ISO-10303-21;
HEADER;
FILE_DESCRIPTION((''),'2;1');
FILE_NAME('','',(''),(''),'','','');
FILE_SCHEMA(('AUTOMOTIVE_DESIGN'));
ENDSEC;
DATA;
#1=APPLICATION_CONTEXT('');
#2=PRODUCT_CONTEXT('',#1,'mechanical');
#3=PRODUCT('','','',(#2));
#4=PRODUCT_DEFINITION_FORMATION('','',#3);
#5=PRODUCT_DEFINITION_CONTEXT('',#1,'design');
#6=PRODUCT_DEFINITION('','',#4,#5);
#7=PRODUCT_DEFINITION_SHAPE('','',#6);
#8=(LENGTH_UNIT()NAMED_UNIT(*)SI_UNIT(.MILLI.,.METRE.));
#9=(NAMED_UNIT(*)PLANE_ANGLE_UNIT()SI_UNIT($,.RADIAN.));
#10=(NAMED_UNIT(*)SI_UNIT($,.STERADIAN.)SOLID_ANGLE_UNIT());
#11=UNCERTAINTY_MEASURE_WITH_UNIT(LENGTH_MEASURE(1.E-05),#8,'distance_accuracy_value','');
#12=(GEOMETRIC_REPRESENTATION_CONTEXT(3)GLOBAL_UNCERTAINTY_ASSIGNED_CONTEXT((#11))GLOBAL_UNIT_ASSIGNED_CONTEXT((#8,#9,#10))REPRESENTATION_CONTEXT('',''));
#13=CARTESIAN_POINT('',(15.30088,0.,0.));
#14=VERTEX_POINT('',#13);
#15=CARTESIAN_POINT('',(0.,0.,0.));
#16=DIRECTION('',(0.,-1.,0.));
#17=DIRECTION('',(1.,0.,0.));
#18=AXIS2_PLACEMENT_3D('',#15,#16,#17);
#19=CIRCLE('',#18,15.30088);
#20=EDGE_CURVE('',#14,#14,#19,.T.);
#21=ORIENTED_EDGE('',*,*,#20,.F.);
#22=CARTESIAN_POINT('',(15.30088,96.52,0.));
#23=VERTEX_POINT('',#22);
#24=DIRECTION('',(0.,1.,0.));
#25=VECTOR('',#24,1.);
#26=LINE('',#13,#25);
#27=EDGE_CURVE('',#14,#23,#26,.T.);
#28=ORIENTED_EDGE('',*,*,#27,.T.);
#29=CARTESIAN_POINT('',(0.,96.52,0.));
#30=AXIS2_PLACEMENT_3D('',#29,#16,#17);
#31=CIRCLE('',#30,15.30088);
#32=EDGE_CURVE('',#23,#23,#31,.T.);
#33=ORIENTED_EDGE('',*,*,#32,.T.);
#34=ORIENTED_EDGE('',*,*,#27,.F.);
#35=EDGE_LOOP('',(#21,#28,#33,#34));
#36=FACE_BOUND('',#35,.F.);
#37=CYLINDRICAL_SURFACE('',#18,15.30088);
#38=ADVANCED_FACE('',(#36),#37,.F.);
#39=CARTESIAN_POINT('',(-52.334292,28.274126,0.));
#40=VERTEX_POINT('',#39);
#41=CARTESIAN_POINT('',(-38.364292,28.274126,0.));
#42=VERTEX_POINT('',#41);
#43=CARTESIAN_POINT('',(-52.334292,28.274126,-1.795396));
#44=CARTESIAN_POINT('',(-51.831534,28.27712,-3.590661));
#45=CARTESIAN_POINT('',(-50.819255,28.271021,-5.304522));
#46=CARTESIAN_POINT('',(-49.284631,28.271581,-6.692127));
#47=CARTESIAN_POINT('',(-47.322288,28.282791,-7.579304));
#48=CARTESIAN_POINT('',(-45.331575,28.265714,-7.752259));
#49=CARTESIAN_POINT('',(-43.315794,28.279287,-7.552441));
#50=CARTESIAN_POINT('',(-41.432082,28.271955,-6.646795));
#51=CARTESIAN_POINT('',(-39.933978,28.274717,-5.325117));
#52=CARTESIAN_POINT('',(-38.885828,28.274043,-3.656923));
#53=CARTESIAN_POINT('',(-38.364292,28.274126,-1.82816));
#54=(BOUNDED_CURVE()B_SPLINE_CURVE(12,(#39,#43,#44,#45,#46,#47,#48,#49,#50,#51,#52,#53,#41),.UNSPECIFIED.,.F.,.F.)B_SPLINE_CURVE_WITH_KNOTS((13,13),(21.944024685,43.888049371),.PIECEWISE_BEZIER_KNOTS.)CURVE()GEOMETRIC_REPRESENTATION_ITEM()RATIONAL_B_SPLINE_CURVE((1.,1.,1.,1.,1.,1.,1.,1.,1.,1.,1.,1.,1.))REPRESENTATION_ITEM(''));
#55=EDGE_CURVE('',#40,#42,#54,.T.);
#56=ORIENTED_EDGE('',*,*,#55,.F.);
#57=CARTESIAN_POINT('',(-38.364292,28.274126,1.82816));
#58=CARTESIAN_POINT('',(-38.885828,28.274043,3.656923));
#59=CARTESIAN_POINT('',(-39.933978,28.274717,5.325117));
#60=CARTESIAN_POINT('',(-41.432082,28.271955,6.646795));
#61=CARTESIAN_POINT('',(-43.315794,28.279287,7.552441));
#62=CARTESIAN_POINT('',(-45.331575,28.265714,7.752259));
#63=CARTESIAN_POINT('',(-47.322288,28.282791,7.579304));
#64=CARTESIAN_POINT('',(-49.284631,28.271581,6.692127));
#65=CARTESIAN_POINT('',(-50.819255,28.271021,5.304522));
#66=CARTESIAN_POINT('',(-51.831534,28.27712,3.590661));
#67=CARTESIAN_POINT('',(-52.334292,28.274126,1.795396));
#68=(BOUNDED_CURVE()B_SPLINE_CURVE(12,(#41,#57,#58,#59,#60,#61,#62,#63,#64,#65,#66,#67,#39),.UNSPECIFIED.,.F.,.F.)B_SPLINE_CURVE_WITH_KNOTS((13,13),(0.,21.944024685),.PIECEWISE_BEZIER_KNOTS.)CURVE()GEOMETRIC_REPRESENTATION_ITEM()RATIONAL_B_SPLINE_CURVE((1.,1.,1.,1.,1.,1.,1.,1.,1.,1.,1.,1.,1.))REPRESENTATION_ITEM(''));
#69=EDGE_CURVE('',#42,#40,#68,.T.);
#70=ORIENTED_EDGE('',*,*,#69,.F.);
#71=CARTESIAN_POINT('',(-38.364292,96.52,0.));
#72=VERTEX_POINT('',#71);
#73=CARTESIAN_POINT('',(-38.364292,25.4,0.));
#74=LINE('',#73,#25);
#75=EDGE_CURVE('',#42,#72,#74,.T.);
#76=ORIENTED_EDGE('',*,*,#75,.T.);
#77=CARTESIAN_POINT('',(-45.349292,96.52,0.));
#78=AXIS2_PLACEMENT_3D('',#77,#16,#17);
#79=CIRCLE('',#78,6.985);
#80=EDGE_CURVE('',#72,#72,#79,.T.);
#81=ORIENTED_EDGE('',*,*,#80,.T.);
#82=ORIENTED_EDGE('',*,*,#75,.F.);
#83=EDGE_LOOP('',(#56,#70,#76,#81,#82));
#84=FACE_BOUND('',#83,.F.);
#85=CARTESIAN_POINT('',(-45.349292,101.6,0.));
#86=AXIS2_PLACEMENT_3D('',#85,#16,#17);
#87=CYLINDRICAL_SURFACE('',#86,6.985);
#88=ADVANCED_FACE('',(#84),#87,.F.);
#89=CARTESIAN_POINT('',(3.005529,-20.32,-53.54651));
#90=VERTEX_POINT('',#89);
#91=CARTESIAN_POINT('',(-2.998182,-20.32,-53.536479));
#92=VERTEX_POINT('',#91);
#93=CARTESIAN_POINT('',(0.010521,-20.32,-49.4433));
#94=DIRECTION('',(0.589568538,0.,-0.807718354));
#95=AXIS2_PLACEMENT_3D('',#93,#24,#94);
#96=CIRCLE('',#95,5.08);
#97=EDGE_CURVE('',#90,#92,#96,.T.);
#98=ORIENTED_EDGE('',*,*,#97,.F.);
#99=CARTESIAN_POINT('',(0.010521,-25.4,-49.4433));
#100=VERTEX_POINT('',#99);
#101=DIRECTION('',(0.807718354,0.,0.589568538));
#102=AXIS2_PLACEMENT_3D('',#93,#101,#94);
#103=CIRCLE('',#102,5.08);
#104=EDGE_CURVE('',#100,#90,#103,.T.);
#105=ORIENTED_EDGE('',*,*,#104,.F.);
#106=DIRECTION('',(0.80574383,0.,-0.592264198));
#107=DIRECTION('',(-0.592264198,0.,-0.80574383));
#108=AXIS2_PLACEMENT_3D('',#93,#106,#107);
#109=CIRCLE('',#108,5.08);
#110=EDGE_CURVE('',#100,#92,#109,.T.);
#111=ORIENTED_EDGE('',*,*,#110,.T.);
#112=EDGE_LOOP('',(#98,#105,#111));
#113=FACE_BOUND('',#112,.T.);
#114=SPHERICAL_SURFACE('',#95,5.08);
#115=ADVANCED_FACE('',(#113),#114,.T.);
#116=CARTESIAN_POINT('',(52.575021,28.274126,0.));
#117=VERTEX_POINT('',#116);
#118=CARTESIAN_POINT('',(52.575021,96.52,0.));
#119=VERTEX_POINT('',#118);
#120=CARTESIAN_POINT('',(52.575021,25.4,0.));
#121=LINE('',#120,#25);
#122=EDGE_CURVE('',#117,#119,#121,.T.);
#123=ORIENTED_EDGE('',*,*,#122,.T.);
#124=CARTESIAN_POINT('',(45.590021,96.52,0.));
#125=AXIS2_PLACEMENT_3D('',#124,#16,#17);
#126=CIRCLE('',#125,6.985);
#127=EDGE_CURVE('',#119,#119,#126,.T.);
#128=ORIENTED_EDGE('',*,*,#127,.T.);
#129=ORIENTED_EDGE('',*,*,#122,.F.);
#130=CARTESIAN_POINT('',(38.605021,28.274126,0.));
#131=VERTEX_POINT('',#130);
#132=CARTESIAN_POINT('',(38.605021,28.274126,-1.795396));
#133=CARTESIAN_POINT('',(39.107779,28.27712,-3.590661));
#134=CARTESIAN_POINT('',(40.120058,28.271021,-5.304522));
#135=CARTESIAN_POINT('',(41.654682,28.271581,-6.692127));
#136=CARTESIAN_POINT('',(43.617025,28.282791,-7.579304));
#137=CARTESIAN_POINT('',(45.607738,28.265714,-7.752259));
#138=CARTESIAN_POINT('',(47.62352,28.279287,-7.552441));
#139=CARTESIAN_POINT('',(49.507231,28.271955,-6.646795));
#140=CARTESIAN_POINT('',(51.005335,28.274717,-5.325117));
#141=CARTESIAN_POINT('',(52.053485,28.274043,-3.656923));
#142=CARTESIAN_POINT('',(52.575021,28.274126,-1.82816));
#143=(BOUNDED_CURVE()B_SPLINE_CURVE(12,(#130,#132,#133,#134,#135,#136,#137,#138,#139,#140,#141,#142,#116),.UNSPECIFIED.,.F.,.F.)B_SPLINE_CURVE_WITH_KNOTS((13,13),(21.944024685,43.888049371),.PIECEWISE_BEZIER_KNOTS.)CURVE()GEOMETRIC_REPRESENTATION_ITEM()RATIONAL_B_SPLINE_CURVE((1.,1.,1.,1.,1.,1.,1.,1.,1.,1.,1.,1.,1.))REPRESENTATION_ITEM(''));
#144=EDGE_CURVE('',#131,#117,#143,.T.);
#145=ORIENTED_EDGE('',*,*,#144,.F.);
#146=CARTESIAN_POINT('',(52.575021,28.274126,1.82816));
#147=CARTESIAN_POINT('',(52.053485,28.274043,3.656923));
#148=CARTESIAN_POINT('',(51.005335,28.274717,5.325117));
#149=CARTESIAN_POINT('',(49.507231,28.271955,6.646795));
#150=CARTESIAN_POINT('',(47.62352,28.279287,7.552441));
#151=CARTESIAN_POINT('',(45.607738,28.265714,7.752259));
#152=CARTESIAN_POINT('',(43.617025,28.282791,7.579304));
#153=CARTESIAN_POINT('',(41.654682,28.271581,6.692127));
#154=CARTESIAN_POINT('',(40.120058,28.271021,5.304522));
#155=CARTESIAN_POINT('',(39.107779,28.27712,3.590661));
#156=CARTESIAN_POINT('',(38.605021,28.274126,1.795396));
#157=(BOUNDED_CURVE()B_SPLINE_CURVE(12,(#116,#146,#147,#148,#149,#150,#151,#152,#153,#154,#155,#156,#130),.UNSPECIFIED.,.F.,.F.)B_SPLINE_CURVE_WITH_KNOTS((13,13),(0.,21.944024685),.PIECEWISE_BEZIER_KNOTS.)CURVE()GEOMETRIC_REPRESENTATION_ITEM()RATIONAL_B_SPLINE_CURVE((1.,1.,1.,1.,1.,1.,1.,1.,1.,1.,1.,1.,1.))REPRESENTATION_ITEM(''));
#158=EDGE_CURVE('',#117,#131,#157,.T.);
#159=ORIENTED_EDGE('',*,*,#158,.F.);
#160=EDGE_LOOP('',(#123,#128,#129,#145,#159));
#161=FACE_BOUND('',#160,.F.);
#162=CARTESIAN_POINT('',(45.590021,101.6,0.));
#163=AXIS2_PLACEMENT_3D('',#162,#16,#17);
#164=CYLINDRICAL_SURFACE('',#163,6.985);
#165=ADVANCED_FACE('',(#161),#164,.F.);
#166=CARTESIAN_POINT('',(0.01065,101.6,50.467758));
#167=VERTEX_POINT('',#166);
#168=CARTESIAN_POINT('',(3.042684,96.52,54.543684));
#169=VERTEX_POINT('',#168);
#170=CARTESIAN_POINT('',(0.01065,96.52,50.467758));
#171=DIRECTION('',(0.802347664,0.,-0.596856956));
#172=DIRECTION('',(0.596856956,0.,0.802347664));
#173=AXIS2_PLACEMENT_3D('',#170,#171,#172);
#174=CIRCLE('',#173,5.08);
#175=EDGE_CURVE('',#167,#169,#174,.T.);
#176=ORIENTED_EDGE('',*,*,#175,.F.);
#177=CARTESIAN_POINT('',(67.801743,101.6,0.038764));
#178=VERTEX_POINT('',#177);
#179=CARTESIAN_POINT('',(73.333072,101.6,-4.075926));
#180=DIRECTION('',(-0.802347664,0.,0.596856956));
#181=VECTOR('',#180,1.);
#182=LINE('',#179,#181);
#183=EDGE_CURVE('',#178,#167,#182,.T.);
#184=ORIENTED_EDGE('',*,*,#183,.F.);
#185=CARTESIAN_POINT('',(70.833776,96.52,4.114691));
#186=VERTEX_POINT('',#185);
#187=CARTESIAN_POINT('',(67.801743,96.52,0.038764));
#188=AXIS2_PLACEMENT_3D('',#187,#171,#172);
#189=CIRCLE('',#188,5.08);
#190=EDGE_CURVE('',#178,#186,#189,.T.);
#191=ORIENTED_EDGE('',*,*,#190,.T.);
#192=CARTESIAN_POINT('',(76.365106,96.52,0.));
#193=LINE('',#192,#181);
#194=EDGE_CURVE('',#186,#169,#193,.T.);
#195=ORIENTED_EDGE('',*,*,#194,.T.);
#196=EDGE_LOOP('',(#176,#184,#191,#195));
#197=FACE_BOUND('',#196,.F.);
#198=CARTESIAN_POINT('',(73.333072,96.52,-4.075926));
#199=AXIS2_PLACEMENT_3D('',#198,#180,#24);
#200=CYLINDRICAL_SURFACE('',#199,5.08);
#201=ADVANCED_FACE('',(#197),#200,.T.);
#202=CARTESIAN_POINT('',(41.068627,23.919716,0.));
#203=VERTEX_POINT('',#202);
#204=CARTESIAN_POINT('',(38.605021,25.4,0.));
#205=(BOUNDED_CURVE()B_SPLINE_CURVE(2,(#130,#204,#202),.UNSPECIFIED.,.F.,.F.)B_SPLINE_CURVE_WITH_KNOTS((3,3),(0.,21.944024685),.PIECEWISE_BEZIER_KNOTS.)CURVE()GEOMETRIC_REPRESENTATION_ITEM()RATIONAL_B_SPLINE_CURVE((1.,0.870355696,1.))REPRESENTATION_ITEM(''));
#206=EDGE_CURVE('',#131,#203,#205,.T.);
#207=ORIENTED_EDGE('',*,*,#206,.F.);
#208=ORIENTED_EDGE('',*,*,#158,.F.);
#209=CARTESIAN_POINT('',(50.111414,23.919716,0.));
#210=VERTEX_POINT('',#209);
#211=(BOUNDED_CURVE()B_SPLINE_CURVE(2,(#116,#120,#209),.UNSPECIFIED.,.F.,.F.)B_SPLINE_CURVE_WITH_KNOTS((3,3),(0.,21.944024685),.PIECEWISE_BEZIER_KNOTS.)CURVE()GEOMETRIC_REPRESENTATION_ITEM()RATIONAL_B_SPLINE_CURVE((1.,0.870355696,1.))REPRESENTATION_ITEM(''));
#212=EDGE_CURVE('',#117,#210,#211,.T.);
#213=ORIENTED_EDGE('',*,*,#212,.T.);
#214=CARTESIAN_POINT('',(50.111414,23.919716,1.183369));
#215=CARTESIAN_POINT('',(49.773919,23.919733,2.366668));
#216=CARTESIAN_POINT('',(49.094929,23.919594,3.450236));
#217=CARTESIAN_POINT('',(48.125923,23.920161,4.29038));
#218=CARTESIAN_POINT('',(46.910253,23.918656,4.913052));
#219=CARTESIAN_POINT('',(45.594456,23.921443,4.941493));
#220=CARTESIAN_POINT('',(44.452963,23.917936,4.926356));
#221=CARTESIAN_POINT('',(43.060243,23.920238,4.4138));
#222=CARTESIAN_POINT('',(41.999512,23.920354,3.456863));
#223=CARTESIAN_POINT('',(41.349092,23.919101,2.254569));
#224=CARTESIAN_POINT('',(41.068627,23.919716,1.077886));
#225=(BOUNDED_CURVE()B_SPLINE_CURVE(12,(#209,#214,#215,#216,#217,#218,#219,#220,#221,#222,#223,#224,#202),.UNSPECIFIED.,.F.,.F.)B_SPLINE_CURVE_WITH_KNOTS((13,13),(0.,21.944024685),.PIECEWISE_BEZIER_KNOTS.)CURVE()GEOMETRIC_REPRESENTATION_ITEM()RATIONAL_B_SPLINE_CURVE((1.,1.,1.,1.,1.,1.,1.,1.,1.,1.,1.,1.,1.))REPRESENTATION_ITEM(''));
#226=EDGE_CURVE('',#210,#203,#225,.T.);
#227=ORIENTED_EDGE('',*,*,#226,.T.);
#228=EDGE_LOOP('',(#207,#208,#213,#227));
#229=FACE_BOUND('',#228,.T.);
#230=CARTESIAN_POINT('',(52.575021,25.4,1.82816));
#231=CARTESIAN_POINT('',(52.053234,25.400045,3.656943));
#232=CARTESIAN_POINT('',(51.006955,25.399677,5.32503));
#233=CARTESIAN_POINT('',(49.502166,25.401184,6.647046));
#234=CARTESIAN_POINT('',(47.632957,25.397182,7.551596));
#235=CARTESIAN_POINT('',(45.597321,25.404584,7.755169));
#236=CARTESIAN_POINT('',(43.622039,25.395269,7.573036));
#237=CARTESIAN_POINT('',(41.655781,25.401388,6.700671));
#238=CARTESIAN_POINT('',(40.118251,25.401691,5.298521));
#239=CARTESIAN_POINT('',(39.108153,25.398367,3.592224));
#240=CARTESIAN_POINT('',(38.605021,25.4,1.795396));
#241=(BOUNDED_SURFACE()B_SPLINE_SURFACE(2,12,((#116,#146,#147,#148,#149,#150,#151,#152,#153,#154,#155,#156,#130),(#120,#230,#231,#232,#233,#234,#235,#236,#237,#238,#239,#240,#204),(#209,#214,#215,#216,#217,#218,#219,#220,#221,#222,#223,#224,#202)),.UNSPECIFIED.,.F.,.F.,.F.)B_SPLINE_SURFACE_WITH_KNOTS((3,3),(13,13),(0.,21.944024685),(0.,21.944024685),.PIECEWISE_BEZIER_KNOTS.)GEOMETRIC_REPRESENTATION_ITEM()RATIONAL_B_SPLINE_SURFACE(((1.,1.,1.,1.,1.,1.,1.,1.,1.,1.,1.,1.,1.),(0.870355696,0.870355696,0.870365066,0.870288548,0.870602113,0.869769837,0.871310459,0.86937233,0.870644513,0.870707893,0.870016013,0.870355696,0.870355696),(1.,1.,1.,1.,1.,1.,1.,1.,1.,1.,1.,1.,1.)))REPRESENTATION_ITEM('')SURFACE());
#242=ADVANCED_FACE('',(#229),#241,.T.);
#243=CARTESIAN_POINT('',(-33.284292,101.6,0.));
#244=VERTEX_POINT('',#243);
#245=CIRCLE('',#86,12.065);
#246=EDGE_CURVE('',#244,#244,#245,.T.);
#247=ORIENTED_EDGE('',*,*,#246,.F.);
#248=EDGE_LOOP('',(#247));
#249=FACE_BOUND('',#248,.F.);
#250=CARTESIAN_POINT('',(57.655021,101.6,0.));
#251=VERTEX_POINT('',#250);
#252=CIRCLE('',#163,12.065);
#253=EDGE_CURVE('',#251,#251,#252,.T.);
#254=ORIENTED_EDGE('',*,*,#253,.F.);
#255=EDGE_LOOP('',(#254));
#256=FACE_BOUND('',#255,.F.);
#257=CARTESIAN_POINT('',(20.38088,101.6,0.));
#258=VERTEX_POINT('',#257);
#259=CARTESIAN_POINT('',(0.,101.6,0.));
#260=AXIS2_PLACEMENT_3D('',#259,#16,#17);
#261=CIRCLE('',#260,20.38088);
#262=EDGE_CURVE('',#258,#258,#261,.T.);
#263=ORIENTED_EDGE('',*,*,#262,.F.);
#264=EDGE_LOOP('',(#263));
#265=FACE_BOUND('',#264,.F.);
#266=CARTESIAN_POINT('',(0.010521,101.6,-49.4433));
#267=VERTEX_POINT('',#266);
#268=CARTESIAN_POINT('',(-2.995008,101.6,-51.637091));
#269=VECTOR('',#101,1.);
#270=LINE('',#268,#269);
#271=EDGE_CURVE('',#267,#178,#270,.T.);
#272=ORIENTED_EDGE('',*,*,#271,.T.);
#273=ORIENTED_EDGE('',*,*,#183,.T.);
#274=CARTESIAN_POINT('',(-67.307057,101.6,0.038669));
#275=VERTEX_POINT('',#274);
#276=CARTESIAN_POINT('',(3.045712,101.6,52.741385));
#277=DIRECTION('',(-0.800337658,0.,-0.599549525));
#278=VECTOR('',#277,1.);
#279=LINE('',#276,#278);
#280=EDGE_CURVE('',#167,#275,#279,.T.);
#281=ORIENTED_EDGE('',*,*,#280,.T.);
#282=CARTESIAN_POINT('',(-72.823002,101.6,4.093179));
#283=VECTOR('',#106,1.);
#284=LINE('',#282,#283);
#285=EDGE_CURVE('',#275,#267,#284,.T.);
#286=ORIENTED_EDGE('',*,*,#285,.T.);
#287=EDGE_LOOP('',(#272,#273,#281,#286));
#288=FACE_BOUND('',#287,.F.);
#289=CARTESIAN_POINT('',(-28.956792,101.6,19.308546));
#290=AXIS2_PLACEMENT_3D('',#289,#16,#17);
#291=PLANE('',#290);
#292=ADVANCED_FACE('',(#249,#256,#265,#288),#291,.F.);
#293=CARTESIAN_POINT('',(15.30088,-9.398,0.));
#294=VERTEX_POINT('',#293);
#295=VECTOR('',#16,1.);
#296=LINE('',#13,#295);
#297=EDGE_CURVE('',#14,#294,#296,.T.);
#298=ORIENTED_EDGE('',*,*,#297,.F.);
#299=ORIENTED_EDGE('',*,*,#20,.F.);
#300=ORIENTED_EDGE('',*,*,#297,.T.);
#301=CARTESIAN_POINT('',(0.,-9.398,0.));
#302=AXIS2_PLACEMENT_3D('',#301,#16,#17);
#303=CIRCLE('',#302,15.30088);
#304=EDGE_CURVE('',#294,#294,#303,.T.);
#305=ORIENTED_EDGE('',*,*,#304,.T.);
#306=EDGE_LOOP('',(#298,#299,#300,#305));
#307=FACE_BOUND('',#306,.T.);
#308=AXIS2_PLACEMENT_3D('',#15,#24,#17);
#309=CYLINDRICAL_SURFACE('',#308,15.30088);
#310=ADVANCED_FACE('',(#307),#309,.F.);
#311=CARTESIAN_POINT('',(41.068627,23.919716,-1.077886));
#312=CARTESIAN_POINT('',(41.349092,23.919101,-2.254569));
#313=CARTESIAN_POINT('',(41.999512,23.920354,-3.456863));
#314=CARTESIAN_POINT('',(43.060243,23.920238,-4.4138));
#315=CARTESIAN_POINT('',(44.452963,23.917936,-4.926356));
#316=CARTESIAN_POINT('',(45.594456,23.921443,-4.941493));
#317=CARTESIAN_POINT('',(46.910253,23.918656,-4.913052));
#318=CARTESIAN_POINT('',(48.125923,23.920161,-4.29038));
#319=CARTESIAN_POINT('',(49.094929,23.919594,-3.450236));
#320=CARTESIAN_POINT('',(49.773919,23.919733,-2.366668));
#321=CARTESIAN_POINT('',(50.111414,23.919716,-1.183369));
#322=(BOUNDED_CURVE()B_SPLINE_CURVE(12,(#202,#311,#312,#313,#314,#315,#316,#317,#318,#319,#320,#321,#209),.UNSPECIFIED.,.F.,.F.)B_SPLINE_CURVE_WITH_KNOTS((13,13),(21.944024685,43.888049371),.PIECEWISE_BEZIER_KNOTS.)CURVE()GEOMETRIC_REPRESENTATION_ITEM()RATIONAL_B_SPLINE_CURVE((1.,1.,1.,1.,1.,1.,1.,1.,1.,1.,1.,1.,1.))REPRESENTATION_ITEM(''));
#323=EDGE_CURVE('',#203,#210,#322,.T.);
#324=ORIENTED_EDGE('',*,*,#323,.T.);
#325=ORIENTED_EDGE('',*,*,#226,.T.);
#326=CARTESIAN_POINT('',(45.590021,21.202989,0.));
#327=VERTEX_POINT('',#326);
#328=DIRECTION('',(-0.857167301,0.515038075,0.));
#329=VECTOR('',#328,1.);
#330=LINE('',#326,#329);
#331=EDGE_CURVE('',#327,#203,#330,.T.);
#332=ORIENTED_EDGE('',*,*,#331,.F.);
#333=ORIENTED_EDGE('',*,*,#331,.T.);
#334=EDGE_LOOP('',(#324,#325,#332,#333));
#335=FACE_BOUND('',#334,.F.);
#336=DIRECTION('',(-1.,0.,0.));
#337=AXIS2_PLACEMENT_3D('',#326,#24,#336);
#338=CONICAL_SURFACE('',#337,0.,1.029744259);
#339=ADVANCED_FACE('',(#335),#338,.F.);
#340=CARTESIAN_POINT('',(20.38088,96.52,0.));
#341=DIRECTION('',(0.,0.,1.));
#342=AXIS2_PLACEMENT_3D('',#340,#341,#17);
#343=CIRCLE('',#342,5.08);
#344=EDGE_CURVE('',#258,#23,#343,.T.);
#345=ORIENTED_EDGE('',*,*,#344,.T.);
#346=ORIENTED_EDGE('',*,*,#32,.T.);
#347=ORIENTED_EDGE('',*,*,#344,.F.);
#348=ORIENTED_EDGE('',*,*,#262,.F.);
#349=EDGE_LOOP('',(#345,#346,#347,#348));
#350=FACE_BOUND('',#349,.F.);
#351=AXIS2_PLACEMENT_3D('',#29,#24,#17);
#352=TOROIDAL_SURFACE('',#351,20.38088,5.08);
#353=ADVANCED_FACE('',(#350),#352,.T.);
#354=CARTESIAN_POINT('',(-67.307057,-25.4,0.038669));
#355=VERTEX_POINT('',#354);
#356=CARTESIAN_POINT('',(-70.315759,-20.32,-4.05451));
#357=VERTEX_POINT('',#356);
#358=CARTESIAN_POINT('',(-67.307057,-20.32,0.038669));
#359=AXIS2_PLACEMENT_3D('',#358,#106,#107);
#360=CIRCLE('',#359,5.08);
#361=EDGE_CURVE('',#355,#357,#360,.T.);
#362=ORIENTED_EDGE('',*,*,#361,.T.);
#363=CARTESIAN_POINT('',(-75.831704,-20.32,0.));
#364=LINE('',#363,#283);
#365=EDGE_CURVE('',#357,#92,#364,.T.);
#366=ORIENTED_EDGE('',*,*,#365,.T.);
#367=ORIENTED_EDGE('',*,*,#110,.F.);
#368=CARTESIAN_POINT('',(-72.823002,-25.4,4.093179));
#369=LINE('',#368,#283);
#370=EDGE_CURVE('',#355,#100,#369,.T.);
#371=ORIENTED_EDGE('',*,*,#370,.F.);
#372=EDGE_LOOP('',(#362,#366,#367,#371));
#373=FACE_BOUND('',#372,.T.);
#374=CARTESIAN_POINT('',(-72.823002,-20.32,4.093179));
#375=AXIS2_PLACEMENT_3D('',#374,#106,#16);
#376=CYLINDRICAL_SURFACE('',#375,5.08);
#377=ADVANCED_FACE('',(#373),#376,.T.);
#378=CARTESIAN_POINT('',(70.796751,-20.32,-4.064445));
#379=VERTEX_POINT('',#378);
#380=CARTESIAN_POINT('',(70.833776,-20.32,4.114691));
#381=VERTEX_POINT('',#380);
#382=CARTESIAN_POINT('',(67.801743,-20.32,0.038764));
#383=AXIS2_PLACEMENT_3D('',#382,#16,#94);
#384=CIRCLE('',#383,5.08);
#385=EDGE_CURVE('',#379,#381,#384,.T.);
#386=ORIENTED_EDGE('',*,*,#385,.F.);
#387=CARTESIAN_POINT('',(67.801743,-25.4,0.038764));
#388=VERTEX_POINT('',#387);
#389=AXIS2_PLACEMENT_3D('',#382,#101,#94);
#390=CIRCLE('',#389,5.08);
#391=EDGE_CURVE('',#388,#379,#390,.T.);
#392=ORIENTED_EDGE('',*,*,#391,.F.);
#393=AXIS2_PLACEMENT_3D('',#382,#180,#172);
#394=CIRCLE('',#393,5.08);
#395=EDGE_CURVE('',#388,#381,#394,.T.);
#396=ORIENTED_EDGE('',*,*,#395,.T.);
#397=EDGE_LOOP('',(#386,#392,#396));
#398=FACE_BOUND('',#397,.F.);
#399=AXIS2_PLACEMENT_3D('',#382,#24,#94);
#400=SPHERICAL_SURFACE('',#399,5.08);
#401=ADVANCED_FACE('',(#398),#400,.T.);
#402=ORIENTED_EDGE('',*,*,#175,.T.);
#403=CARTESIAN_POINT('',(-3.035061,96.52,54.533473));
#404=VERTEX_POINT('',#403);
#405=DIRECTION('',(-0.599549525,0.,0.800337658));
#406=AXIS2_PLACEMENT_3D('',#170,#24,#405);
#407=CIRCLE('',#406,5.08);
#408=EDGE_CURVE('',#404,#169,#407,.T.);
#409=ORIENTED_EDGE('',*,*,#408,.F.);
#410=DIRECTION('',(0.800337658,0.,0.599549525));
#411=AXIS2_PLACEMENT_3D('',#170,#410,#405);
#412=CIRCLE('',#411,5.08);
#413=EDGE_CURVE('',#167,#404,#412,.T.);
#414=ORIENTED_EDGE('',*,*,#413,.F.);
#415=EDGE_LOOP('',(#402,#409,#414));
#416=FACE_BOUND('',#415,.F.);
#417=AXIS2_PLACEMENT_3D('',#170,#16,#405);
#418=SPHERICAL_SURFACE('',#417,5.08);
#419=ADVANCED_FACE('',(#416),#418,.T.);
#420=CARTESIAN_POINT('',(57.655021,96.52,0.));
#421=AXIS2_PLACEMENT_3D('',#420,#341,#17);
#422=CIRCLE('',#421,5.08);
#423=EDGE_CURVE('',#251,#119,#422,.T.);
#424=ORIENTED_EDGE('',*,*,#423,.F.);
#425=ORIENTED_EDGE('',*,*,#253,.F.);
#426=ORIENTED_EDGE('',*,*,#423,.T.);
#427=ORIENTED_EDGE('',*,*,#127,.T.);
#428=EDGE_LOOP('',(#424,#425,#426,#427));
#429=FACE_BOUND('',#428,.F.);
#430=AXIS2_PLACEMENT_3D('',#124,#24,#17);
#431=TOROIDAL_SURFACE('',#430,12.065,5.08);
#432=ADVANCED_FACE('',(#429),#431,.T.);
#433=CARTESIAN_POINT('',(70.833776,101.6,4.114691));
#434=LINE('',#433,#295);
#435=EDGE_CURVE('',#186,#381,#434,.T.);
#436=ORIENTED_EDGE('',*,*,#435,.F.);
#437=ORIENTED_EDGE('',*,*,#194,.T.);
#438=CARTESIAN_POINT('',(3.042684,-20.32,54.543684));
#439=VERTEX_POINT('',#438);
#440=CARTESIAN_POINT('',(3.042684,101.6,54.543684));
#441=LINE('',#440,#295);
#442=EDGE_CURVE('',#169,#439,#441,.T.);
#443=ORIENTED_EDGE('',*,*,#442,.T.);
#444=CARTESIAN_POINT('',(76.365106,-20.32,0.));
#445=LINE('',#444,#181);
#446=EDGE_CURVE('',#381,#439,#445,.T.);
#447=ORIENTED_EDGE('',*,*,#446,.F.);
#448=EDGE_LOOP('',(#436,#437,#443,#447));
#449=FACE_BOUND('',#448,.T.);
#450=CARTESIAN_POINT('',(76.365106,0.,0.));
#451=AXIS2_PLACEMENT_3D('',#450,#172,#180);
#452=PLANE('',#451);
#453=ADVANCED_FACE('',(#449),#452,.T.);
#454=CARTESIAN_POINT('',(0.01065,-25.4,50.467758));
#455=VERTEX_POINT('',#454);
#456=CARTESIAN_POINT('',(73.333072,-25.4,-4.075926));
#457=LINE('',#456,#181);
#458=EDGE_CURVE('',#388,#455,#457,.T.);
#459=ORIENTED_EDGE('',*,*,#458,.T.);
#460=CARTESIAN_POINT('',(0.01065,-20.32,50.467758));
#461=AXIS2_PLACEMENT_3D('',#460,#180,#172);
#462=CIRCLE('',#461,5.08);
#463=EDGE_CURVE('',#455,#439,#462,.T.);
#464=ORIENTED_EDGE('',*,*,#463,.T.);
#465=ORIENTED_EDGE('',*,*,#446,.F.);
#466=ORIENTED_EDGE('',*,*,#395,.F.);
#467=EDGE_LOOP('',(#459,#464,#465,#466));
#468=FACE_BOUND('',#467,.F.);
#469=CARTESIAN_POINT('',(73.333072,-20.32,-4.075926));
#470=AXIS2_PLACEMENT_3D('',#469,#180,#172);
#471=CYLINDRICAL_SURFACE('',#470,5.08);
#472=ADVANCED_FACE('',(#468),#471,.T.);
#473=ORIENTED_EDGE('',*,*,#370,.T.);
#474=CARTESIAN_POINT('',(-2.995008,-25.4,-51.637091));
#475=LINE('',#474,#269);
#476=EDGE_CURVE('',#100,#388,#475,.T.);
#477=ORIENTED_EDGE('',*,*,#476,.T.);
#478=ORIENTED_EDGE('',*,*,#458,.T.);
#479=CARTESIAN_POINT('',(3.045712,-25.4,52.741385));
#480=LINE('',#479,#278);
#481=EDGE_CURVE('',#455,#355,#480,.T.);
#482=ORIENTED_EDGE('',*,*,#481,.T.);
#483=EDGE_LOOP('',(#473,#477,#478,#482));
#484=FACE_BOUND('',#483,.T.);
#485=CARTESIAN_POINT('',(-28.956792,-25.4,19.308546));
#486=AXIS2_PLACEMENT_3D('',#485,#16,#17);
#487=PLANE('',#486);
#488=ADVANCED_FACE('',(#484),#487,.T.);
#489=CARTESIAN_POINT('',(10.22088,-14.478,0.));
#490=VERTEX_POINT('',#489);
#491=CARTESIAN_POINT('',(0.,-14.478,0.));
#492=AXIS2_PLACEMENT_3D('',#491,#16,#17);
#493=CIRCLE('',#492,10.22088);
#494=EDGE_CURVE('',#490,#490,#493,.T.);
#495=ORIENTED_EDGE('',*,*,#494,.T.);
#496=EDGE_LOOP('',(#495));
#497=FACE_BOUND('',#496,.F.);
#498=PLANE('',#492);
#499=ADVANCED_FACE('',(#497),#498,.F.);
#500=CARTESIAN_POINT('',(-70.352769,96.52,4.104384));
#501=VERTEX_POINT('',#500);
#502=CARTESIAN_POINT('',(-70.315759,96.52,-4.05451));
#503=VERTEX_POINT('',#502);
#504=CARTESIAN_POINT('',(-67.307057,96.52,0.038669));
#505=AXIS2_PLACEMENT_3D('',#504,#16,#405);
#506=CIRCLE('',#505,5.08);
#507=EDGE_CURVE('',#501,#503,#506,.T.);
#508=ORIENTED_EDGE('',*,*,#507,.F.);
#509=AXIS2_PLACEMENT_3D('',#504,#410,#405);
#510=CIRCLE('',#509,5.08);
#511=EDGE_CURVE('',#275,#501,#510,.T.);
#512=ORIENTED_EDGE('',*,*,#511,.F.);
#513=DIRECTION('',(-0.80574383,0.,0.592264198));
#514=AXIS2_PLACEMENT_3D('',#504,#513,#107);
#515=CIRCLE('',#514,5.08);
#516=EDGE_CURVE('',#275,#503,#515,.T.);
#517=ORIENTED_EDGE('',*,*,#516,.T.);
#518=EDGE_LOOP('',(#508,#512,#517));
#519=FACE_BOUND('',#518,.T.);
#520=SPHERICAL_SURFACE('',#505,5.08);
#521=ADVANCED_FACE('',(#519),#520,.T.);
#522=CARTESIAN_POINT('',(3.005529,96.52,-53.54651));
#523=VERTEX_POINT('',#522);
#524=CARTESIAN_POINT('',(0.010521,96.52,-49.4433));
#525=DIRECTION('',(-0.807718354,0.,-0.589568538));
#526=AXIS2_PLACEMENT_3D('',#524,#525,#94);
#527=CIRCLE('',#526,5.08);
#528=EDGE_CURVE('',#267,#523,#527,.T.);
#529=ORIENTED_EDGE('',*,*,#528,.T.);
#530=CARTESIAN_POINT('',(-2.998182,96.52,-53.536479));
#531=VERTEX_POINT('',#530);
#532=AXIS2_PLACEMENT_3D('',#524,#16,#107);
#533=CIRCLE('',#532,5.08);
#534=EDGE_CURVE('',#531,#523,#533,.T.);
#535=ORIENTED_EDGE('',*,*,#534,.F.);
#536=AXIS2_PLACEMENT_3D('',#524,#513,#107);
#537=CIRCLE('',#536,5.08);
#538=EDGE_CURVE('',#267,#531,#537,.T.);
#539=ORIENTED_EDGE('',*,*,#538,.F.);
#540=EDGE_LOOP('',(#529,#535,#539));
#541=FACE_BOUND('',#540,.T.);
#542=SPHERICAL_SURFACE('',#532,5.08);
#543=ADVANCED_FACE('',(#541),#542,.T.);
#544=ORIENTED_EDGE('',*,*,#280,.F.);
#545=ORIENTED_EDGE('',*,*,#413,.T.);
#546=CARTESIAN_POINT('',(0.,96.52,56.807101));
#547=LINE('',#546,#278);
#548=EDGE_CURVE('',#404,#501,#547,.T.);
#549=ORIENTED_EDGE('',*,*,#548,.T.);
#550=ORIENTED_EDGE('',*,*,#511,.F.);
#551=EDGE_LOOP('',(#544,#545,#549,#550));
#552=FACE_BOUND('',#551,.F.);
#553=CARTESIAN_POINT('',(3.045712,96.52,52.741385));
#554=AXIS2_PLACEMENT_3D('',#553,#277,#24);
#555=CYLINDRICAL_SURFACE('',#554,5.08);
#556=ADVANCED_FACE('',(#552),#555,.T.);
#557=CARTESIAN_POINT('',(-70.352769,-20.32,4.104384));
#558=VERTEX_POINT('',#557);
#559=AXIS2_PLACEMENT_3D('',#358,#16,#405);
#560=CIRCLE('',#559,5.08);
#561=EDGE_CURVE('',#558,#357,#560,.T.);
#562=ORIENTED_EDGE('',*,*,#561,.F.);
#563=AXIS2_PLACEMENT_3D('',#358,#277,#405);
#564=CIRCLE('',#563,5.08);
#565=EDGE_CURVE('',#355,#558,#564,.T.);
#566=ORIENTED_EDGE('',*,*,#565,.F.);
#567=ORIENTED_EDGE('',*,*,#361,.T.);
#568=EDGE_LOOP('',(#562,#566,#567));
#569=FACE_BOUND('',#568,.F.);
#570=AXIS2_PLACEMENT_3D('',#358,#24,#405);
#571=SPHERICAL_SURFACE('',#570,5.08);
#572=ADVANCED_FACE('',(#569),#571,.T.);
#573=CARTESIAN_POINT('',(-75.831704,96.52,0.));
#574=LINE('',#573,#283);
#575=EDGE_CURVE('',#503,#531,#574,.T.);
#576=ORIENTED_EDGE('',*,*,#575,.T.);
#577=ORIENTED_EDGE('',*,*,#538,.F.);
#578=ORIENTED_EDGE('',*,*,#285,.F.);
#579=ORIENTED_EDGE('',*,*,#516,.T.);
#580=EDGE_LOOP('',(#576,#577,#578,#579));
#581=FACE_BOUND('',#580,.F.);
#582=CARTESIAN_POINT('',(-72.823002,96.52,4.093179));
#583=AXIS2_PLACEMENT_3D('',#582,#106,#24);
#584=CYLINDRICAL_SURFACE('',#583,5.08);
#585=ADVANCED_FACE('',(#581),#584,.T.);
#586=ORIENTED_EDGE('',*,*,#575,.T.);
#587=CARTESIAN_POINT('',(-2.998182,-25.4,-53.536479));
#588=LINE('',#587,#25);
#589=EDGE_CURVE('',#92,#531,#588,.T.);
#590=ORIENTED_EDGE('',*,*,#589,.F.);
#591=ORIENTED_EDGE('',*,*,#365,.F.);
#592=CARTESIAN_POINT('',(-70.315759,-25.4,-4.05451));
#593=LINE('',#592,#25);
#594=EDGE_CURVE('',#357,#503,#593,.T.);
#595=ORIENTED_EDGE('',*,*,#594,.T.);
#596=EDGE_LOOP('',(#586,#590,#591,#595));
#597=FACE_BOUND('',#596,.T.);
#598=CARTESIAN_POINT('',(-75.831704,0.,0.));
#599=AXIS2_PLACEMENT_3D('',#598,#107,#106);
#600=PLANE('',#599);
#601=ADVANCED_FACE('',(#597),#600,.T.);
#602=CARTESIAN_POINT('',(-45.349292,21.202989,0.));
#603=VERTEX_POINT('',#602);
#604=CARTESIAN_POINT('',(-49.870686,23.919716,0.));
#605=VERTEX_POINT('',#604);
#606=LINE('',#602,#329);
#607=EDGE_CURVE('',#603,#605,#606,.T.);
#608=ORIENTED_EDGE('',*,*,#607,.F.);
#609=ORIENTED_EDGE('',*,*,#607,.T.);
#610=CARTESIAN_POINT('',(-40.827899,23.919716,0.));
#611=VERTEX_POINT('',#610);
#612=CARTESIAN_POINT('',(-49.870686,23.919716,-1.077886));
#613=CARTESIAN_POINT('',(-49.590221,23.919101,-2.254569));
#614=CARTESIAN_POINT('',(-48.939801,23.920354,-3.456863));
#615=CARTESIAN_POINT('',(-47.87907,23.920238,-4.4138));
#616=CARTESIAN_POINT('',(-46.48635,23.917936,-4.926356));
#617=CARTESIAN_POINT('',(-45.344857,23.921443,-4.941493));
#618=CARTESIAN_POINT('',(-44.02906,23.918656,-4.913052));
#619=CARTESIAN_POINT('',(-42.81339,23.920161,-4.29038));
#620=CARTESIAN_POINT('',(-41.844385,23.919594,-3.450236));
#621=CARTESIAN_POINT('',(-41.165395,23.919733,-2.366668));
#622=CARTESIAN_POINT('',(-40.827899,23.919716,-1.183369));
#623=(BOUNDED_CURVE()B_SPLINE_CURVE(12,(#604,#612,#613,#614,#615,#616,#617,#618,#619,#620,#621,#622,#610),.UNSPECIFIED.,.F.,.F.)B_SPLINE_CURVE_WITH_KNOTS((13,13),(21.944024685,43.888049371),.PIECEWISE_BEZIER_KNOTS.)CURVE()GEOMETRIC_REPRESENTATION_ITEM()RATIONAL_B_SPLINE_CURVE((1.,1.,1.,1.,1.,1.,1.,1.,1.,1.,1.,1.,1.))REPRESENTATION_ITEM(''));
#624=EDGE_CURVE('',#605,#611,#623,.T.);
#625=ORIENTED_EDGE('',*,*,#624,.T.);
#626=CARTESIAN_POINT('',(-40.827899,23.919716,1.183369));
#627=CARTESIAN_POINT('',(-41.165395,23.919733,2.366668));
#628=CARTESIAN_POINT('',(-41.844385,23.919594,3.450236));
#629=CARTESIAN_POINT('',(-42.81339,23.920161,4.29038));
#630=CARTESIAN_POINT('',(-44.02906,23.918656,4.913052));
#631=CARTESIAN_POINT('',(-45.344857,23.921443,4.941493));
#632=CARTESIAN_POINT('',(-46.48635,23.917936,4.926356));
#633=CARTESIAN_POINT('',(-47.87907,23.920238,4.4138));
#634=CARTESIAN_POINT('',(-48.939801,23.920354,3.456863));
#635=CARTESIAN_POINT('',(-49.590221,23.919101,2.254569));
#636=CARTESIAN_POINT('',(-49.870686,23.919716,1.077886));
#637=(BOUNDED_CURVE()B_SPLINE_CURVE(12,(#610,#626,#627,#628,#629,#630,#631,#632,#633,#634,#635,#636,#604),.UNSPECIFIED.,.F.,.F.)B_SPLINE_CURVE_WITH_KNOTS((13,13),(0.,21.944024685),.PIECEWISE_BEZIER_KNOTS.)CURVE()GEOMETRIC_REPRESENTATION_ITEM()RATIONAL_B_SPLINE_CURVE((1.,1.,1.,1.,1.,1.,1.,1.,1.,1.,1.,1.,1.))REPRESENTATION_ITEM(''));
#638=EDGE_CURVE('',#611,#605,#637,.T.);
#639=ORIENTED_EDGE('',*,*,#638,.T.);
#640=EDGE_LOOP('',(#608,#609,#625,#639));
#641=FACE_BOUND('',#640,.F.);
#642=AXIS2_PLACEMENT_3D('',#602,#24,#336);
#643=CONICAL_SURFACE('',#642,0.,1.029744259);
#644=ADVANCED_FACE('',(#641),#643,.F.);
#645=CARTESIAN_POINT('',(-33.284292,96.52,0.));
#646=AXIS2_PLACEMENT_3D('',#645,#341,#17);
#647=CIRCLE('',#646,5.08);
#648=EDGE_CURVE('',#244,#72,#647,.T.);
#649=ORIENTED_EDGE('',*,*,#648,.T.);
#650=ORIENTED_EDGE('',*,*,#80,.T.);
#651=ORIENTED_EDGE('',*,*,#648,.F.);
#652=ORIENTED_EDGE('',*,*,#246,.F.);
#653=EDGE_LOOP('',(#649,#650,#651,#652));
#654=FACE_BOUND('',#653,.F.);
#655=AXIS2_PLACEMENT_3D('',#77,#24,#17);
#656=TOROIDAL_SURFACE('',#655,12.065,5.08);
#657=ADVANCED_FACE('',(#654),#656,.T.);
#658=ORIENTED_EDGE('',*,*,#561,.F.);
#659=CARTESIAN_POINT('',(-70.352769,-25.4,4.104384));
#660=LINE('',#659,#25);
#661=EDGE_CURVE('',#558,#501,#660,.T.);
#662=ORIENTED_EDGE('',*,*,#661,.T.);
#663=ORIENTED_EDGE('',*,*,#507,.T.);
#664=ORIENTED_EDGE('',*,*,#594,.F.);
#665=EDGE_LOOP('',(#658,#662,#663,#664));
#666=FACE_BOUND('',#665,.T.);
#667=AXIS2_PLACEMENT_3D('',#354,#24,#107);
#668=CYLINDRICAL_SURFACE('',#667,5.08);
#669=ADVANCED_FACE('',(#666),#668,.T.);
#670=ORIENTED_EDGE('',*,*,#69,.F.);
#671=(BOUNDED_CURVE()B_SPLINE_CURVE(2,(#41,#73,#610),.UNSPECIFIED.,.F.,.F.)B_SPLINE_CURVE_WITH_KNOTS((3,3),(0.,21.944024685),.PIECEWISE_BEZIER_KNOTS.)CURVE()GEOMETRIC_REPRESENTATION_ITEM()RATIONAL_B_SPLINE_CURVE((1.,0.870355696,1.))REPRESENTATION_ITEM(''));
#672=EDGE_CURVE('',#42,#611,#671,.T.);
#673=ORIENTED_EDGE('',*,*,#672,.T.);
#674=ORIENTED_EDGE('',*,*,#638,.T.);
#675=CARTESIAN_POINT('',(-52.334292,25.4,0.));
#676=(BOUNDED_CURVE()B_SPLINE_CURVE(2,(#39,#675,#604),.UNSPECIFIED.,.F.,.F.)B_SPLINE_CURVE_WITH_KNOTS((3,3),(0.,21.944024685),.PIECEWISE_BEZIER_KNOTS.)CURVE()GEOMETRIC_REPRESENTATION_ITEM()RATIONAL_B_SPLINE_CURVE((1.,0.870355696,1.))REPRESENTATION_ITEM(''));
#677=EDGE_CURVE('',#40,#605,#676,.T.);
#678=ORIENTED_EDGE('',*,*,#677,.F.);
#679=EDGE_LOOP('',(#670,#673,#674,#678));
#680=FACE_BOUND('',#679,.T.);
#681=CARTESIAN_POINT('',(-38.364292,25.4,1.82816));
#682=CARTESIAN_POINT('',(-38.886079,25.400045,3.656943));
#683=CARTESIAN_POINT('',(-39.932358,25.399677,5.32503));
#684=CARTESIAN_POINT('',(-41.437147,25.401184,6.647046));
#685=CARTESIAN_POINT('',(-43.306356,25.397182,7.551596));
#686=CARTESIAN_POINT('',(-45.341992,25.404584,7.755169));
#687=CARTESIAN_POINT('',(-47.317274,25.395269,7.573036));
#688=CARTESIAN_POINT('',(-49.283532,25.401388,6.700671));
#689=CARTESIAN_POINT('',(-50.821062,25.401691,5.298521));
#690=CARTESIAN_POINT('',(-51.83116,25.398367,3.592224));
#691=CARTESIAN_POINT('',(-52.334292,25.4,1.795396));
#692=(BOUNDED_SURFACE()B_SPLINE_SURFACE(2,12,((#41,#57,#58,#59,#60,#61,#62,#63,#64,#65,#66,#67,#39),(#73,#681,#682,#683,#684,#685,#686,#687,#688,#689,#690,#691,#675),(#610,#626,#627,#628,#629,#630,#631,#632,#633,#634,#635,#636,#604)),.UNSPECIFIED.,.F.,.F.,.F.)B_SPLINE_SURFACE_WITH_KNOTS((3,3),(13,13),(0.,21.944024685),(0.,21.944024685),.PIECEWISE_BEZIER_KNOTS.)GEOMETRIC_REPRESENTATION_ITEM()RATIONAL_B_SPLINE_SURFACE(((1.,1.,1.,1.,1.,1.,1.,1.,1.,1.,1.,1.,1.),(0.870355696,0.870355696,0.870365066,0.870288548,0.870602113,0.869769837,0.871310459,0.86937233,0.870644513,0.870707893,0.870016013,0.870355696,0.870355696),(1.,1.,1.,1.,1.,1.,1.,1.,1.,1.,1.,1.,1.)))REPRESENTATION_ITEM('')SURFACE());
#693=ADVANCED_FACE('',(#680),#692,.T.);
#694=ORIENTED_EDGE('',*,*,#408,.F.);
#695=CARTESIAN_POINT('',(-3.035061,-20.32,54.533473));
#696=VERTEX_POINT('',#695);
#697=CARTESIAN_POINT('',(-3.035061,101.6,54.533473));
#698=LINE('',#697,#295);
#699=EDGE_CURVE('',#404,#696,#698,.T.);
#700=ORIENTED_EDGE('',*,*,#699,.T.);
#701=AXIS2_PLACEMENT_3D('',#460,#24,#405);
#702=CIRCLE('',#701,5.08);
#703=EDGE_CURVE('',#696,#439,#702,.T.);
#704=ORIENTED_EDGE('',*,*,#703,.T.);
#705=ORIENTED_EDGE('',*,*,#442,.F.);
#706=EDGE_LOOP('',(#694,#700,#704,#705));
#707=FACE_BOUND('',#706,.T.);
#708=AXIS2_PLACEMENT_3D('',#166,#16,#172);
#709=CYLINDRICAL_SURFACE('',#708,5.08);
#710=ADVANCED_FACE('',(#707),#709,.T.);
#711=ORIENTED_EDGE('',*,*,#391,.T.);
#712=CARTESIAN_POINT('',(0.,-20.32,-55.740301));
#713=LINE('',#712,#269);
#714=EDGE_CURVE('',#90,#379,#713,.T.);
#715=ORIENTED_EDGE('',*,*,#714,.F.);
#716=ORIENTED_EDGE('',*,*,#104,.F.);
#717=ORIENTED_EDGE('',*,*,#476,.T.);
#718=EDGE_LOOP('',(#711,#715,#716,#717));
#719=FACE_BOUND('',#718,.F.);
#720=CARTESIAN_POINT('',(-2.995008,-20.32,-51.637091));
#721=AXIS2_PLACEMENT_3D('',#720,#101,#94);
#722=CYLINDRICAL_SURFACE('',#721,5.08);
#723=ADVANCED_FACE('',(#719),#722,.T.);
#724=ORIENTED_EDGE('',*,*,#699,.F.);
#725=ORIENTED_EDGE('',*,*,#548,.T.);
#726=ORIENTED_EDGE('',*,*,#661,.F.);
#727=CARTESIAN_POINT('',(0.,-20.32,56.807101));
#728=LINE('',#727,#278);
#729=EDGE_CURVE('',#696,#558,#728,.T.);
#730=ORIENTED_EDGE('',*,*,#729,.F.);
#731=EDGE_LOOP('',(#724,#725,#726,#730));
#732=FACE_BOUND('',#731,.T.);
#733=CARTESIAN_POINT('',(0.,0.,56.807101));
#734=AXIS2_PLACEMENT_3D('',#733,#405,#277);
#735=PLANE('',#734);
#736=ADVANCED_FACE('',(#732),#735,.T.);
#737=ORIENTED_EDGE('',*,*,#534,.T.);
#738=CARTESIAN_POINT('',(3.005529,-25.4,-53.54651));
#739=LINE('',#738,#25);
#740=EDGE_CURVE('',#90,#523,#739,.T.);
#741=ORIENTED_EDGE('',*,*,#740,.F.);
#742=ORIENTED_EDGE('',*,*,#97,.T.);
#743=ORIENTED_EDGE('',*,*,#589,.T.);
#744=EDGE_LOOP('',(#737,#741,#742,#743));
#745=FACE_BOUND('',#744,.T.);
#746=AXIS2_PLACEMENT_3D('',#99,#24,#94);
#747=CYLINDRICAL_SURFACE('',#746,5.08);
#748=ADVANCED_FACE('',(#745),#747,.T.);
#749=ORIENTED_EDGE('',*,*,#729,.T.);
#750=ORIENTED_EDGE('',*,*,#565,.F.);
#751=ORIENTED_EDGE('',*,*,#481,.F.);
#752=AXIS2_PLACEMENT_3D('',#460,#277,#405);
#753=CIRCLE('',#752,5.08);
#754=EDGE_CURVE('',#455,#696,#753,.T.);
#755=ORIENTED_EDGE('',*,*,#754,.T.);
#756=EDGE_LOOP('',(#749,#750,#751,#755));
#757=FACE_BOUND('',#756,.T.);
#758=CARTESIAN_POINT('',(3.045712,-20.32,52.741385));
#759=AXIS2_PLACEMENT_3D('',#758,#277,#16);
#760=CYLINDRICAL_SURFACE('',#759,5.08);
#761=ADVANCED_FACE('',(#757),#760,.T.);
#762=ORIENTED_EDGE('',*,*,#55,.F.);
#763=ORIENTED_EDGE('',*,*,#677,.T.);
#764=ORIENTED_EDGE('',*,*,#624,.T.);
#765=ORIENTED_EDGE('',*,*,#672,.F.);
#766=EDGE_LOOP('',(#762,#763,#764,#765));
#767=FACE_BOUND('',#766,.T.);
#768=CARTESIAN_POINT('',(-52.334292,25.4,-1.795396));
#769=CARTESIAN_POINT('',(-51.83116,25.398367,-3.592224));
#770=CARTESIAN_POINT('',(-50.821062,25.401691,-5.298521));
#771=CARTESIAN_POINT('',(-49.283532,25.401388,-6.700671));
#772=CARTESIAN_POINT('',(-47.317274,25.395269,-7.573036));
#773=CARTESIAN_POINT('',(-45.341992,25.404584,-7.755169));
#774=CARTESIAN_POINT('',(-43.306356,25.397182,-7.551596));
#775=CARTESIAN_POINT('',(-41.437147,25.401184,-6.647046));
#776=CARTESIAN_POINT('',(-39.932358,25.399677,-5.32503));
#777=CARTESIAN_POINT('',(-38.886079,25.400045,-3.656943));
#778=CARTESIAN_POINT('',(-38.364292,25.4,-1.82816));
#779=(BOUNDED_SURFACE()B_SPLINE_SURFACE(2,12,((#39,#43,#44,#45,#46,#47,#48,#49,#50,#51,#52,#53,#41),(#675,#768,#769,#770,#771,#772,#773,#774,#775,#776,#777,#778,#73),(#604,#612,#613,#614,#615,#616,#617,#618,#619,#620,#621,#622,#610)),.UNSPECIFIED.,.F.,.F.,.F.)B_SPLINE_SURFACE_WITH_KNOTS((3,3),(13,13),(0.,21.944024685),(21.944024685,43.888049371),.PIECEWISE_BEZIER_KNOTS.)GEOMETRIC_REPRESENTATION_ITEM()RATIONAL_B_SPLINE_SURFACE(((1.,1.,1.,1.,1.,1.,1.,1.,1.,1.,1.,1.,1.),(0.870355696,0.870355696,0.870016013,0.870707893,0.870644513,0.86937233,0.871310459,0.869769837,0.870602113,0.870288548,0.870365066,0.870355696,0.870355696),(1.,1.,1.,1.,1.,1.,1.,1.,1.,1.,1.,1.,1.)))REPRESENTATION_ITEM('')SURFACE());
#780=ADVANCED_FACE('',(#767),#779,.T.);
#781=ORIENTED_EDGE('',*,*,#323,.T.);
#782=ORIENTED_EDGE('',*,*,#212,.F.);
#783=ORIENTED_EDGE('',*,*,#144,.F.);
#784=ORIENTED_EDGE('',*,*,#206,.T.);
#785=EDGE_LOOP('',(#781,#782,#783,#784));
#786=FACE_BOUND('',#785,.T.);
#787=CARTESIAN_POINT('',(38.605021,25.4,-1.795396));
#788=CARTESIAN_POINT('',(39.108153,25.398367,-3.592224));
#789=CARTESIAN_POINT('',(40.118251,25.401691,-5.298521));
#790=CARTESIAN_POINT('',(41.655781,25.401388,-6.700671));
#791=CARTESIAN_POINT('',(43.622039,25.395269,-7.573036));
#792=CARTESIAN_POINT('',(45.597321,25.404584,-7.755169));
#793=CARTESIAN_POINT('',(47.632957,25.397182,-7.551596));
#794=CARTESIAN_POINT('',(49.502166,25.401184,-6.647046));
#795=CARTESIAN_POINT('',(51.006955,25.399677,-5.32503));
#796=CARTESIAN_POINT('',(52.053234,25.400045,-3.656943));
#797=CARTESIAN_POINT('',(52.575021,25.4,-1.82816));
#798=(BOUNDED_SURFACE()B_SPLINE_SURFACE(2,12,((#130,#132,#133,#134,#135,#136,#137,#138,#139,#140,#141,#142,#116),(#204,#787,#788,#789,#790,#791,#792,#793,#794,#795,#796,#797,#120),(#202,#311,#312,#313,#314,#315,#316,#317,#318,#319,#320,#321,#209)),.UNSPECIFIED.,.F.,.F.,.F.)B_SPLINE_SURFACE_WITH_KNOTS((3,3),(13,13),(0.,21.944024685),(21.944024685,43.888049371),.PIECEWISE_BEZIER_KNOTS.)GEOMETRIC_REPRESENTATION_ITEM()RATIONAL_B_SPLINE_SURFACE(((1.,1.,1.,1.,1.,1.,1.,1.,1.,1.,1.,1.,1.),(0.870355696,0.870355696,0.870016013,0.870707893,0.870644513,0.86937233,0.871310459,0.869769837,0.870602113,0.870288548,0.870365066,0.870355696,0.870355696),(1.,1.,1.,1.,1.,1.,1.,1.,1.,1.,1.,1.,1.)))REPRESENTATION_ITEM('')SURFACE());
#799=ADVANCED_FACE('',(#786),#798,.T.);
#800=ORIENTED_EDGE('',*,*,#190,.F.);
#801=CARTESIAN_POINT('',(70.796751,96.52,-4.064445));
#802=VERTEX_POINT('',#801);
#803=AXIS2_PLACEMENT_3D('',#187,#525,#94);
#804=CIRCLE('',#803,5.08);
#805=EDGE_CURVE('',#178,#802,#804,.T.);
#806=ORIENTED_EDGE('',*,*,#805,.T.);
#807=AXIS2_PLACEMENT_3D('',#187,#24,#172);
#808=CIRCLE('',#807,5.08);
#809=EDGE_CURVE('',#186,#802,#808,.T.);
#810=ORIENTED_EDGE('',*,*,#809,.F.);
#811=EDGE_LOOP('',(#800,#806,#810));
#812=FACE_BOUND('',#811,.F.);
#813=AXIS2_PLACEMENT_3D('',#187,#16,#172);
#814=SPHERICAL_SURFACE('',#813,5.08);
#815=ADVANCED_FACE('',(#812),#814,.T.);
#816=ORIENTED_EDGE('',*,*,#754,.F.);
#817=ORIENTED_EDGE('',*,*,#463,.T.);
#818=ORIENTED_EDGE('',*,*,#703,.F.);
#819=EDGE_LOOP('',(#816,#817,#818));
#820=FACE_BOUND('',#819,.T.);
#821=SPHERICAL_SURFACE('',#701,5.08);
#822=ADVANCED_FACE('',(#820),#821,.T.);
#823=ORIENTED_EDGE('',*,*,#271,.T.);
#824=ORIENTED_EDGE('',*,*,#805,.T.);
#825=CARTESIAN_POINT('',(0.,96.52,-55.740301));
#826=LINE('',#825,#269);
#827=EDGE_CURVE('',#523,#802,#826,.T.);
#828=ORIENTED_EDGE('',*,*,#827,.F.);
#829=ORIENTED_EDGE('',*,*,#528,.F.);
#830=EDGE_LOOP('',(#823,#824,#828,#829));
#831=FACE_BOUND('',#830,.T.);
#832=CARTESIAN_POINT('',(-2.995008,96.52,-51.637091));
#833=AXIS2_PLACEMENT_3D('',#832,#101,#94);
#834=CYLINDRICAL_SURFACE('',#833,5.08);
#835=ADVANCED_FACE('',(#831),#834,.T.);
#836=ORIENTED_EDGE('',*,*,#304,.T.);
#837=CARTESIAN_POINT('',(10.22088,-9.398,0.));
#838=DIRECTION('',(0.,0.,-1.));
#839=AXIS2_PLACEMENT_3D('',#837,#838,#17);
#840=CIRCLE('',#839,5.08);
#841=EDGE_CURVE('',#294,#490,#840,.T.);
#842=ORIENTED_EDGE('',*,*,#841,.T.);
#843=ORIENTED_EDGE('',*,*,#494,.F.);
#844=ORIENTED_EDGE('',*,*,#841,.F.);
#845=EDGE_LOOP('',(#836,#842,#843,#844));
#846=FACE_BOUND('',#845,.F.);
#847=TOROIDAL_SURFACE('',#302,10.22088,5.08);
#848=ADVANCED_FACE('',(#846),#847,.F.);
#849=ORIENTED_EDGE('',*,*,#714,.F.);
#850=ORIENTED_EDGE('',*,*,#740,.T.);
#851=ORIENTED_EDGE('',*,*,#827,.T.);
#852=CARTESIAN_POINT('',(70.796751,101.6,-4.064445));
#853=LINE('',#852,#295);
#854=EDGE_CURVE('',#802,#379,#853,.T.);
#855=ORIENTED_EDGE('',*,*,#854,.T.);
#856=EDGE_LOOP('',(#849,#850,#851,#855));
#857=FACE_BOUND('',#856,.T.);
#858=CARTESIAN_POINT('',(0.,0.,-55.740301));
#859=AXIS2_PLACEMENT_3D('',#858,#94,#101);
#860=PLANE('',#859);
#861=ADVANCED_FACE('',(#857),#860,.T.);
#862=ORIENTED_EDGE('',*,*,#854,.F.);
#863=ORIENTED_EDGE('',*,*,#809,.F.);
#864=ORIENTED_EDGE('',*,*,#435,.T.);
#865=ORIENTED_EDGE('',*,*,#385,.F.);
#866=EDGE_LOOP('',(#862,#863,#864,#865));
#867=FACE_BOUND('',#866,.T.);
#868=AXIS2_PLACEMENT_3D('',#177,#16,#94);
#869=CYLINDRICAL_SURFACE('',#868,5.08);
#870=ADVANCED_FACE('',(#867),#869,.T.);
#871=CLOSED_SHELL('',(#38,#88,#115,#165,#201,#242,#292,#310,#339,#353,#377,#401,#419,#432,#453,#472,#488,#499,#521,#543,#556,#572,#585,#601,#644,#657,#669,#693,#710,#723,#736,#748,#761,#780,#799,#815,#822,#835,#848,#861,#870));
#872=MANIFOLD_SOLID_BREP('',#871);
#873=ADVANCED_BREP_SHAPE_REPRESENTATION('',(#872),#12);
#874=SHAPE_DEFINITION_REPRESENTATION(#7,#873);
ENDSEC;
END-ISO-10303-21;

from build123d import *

# Parameters (mm, degrees)
F1_DEPTH       = 25.4
F2_R           = 15.300879685
F3_DEPTH       = 14.478
F4_DEPTH       = 101.6
F6_D           = 13.97
F6_DEPTH       = 76.2
F6_CBORE_D     = 13.97
F6_CBORE_DEPTH = 6.35
F6_TIP         = 4.1970114239
F8_D           = 13.97
F8_DEPTH       = 76.2
F8_CBORE_D     = 13.97
F8_CBORE_DEPTH = 6.35
F8_TIP         = 4.1970114239
F9_R           = 5.08


with BuildPart() as f1:
    # F0 (on Front) → F1 (new body)
    with BuildSketch(Plane.XZ):
        with BuildLine():
            ThreePointArc((-7.1662437988, 0), (-5.0672995858, 5.0672995858), (0, 7.1662437988))
            Line((0, 7.1662437988), (0, 56.8071007729))
            Line((0, 56.8071007729), (-75.8317038417, 0))
            Line((-75.8317038417, 0), (-7.1662437988, 0))
        make_face()
        with BuildLine():
            Line((0, 56.8071007729), (0, 7.1662437988))
            ThreePointArc((0, 7.1662437988), (5.0672995858, 5.0672995858), (7.1662437988, 0))
            Line((7.1662437988, 0), (76.3651058078, 0))
            Line((76.3651058078, 0), (0, 56.8071007729))
        make_face()
        with BuildLine():
            Line((76.3651058078, 0), (7.1662437988, 0))
            ThreePointArc((7.1662437988, 0), (5.0672995858, -5.0672995858), (0, -7.1662437988))
            Line((0, -7.1662437988), (0, -55.740300566))
            Line((0, -55.740300566), (76.3651058078, 0))
        make_face()
        with BuildLine():
            Line((0, -55.740300566), (0, -7.1662437988))
            ThreePointArc((0, -7.1662437988), (-5.0672995858, -5.0672995858), (-7.1662437988, 0))
            Line((-7.1662437988, 0), (-75.8317038417, 0))
            Line((-75.8317038417, 0), (0, -55.740300566))
        make_face()
        with BuildLine():
            Line((7.1662437988, 0), (0, 0))
            Line((0, 0), (0, -7.1662437988))
            ThreePointArc((0, -7.1662437988), (5.0672995858, -5.0672995858), (7.1662437988, 0))
        make_face()
        with BuildLine():
            Line((-7.1662437988, 0), (0, 0))
            Line((0, 0), (0, 7.1662437988))
            ThreePointArc((0, 7.1662437988), (-5.0672995858, 5.0672995858), (-7.1662437988, 0))
        make_face()
        with BuildLine():
            Line((0, 7.1662437988), (0, 0))
            Line((0, 0), (7.1662437988, 0))
            ThreePointArc((7.1662437988, 0), (5.0672995858, 5.0672995858), (0, 7.1662437988))
        make_face()
        with BuildLine():
            Line((0, -7.1662437988), (0, 0))
            Line((0, 0), (-7.1662437988, 0))
            ThreePointArc((-7.1662437988, 0), (-5.0672995858, -5.0672995858), (0, -7.1662437988))
        make_face()
    extrude(amount=F1_DEPTH)

    # F2 (on Front) → F3 (cut)
    with BuildSketch(Plane.XZ):
        Circle(F2_R)
    extrude(amount=F3_DEPTH, mode=Mode.SUBTRACT)

    # F4 (add): a face of the model
    f4_faces = [f1.faces().sort_by_distance(p)[0] for p in [
        (-36.7809633217, 0, 26.8885894929),
    ]]
    extrude(f4_faces, amount=F4_DEPTH)

    # F6
    with Locations(Plane(origin=(0, 101.6, 0), x_dir=(-1, 0, 0), z_dir=(0, 1, 0))):
        with Locations((-45.5900207162, 0)):
            CounterBoreHole(F6_D / 2, F6_CBORE_D / 2, F6_CBORE_DEPTH, depth=F6_DEPTH)
            with Locations((0, 0, -(F6_DEPTH + F6_TIP / 2))):  # 118° drill point
                Cone(0, F6_D / 2, F6_TIP, mode=Mode.SUBTRACT)

    # F8
    with Locations(Plane(origin=(0, 101.6, 0), x_dir=(-1, 0, 0), z_dir=(0, 1, 0))):
        with Locations((45.3492924571, 0)):
            CounterBoreHole(F8_D / 2, F8_CBORE_D / 2, F8_CBORE_DEPTH, depth=F8_DEPTH)
            with Locations((0, 0, -(F8_DEPTH + F8_TIP / 2))):  # 118° drill point
                Cone(0, F8_D / 2, F8_TIP, mode=Mode.SUBTRACT)

    # F9
    f9_edges = [f1.edges().sort_by_distance(p)[0] for p in [
        (38.182553, 101.6, 28.40355),
        (38.182553, 101.6, -27.87015),
        (-15.30088, -14.478, 0),
        (-15.30088, 101.6, 0),
        (-37.915852, -25.4, -27.87015),
        (0, 38.1, -55.740301),
        (-37.915852, 101.6, -27.87015),
        (-75.831704, 38.1, 0),
        (0, 38.1, 56.807101),
        (-37.915852, -25.4, 28.40355),
        (-37.915852, 101.6, 28.40355),
        (38.182553, -25.4, -27.87015),
        (38.182553, -25.4, 28.40355),
        (76.365106, 38.1, 0),
        (-38.364292, 101.6, 0),
        (52.575021, 101.6, 0),
        (-38.364292, 25.4, 0),
        (52.575021, 25.4, 0),
    ]]
    fillet(f9_edges, radius=F9_R)


solid = f1.part
